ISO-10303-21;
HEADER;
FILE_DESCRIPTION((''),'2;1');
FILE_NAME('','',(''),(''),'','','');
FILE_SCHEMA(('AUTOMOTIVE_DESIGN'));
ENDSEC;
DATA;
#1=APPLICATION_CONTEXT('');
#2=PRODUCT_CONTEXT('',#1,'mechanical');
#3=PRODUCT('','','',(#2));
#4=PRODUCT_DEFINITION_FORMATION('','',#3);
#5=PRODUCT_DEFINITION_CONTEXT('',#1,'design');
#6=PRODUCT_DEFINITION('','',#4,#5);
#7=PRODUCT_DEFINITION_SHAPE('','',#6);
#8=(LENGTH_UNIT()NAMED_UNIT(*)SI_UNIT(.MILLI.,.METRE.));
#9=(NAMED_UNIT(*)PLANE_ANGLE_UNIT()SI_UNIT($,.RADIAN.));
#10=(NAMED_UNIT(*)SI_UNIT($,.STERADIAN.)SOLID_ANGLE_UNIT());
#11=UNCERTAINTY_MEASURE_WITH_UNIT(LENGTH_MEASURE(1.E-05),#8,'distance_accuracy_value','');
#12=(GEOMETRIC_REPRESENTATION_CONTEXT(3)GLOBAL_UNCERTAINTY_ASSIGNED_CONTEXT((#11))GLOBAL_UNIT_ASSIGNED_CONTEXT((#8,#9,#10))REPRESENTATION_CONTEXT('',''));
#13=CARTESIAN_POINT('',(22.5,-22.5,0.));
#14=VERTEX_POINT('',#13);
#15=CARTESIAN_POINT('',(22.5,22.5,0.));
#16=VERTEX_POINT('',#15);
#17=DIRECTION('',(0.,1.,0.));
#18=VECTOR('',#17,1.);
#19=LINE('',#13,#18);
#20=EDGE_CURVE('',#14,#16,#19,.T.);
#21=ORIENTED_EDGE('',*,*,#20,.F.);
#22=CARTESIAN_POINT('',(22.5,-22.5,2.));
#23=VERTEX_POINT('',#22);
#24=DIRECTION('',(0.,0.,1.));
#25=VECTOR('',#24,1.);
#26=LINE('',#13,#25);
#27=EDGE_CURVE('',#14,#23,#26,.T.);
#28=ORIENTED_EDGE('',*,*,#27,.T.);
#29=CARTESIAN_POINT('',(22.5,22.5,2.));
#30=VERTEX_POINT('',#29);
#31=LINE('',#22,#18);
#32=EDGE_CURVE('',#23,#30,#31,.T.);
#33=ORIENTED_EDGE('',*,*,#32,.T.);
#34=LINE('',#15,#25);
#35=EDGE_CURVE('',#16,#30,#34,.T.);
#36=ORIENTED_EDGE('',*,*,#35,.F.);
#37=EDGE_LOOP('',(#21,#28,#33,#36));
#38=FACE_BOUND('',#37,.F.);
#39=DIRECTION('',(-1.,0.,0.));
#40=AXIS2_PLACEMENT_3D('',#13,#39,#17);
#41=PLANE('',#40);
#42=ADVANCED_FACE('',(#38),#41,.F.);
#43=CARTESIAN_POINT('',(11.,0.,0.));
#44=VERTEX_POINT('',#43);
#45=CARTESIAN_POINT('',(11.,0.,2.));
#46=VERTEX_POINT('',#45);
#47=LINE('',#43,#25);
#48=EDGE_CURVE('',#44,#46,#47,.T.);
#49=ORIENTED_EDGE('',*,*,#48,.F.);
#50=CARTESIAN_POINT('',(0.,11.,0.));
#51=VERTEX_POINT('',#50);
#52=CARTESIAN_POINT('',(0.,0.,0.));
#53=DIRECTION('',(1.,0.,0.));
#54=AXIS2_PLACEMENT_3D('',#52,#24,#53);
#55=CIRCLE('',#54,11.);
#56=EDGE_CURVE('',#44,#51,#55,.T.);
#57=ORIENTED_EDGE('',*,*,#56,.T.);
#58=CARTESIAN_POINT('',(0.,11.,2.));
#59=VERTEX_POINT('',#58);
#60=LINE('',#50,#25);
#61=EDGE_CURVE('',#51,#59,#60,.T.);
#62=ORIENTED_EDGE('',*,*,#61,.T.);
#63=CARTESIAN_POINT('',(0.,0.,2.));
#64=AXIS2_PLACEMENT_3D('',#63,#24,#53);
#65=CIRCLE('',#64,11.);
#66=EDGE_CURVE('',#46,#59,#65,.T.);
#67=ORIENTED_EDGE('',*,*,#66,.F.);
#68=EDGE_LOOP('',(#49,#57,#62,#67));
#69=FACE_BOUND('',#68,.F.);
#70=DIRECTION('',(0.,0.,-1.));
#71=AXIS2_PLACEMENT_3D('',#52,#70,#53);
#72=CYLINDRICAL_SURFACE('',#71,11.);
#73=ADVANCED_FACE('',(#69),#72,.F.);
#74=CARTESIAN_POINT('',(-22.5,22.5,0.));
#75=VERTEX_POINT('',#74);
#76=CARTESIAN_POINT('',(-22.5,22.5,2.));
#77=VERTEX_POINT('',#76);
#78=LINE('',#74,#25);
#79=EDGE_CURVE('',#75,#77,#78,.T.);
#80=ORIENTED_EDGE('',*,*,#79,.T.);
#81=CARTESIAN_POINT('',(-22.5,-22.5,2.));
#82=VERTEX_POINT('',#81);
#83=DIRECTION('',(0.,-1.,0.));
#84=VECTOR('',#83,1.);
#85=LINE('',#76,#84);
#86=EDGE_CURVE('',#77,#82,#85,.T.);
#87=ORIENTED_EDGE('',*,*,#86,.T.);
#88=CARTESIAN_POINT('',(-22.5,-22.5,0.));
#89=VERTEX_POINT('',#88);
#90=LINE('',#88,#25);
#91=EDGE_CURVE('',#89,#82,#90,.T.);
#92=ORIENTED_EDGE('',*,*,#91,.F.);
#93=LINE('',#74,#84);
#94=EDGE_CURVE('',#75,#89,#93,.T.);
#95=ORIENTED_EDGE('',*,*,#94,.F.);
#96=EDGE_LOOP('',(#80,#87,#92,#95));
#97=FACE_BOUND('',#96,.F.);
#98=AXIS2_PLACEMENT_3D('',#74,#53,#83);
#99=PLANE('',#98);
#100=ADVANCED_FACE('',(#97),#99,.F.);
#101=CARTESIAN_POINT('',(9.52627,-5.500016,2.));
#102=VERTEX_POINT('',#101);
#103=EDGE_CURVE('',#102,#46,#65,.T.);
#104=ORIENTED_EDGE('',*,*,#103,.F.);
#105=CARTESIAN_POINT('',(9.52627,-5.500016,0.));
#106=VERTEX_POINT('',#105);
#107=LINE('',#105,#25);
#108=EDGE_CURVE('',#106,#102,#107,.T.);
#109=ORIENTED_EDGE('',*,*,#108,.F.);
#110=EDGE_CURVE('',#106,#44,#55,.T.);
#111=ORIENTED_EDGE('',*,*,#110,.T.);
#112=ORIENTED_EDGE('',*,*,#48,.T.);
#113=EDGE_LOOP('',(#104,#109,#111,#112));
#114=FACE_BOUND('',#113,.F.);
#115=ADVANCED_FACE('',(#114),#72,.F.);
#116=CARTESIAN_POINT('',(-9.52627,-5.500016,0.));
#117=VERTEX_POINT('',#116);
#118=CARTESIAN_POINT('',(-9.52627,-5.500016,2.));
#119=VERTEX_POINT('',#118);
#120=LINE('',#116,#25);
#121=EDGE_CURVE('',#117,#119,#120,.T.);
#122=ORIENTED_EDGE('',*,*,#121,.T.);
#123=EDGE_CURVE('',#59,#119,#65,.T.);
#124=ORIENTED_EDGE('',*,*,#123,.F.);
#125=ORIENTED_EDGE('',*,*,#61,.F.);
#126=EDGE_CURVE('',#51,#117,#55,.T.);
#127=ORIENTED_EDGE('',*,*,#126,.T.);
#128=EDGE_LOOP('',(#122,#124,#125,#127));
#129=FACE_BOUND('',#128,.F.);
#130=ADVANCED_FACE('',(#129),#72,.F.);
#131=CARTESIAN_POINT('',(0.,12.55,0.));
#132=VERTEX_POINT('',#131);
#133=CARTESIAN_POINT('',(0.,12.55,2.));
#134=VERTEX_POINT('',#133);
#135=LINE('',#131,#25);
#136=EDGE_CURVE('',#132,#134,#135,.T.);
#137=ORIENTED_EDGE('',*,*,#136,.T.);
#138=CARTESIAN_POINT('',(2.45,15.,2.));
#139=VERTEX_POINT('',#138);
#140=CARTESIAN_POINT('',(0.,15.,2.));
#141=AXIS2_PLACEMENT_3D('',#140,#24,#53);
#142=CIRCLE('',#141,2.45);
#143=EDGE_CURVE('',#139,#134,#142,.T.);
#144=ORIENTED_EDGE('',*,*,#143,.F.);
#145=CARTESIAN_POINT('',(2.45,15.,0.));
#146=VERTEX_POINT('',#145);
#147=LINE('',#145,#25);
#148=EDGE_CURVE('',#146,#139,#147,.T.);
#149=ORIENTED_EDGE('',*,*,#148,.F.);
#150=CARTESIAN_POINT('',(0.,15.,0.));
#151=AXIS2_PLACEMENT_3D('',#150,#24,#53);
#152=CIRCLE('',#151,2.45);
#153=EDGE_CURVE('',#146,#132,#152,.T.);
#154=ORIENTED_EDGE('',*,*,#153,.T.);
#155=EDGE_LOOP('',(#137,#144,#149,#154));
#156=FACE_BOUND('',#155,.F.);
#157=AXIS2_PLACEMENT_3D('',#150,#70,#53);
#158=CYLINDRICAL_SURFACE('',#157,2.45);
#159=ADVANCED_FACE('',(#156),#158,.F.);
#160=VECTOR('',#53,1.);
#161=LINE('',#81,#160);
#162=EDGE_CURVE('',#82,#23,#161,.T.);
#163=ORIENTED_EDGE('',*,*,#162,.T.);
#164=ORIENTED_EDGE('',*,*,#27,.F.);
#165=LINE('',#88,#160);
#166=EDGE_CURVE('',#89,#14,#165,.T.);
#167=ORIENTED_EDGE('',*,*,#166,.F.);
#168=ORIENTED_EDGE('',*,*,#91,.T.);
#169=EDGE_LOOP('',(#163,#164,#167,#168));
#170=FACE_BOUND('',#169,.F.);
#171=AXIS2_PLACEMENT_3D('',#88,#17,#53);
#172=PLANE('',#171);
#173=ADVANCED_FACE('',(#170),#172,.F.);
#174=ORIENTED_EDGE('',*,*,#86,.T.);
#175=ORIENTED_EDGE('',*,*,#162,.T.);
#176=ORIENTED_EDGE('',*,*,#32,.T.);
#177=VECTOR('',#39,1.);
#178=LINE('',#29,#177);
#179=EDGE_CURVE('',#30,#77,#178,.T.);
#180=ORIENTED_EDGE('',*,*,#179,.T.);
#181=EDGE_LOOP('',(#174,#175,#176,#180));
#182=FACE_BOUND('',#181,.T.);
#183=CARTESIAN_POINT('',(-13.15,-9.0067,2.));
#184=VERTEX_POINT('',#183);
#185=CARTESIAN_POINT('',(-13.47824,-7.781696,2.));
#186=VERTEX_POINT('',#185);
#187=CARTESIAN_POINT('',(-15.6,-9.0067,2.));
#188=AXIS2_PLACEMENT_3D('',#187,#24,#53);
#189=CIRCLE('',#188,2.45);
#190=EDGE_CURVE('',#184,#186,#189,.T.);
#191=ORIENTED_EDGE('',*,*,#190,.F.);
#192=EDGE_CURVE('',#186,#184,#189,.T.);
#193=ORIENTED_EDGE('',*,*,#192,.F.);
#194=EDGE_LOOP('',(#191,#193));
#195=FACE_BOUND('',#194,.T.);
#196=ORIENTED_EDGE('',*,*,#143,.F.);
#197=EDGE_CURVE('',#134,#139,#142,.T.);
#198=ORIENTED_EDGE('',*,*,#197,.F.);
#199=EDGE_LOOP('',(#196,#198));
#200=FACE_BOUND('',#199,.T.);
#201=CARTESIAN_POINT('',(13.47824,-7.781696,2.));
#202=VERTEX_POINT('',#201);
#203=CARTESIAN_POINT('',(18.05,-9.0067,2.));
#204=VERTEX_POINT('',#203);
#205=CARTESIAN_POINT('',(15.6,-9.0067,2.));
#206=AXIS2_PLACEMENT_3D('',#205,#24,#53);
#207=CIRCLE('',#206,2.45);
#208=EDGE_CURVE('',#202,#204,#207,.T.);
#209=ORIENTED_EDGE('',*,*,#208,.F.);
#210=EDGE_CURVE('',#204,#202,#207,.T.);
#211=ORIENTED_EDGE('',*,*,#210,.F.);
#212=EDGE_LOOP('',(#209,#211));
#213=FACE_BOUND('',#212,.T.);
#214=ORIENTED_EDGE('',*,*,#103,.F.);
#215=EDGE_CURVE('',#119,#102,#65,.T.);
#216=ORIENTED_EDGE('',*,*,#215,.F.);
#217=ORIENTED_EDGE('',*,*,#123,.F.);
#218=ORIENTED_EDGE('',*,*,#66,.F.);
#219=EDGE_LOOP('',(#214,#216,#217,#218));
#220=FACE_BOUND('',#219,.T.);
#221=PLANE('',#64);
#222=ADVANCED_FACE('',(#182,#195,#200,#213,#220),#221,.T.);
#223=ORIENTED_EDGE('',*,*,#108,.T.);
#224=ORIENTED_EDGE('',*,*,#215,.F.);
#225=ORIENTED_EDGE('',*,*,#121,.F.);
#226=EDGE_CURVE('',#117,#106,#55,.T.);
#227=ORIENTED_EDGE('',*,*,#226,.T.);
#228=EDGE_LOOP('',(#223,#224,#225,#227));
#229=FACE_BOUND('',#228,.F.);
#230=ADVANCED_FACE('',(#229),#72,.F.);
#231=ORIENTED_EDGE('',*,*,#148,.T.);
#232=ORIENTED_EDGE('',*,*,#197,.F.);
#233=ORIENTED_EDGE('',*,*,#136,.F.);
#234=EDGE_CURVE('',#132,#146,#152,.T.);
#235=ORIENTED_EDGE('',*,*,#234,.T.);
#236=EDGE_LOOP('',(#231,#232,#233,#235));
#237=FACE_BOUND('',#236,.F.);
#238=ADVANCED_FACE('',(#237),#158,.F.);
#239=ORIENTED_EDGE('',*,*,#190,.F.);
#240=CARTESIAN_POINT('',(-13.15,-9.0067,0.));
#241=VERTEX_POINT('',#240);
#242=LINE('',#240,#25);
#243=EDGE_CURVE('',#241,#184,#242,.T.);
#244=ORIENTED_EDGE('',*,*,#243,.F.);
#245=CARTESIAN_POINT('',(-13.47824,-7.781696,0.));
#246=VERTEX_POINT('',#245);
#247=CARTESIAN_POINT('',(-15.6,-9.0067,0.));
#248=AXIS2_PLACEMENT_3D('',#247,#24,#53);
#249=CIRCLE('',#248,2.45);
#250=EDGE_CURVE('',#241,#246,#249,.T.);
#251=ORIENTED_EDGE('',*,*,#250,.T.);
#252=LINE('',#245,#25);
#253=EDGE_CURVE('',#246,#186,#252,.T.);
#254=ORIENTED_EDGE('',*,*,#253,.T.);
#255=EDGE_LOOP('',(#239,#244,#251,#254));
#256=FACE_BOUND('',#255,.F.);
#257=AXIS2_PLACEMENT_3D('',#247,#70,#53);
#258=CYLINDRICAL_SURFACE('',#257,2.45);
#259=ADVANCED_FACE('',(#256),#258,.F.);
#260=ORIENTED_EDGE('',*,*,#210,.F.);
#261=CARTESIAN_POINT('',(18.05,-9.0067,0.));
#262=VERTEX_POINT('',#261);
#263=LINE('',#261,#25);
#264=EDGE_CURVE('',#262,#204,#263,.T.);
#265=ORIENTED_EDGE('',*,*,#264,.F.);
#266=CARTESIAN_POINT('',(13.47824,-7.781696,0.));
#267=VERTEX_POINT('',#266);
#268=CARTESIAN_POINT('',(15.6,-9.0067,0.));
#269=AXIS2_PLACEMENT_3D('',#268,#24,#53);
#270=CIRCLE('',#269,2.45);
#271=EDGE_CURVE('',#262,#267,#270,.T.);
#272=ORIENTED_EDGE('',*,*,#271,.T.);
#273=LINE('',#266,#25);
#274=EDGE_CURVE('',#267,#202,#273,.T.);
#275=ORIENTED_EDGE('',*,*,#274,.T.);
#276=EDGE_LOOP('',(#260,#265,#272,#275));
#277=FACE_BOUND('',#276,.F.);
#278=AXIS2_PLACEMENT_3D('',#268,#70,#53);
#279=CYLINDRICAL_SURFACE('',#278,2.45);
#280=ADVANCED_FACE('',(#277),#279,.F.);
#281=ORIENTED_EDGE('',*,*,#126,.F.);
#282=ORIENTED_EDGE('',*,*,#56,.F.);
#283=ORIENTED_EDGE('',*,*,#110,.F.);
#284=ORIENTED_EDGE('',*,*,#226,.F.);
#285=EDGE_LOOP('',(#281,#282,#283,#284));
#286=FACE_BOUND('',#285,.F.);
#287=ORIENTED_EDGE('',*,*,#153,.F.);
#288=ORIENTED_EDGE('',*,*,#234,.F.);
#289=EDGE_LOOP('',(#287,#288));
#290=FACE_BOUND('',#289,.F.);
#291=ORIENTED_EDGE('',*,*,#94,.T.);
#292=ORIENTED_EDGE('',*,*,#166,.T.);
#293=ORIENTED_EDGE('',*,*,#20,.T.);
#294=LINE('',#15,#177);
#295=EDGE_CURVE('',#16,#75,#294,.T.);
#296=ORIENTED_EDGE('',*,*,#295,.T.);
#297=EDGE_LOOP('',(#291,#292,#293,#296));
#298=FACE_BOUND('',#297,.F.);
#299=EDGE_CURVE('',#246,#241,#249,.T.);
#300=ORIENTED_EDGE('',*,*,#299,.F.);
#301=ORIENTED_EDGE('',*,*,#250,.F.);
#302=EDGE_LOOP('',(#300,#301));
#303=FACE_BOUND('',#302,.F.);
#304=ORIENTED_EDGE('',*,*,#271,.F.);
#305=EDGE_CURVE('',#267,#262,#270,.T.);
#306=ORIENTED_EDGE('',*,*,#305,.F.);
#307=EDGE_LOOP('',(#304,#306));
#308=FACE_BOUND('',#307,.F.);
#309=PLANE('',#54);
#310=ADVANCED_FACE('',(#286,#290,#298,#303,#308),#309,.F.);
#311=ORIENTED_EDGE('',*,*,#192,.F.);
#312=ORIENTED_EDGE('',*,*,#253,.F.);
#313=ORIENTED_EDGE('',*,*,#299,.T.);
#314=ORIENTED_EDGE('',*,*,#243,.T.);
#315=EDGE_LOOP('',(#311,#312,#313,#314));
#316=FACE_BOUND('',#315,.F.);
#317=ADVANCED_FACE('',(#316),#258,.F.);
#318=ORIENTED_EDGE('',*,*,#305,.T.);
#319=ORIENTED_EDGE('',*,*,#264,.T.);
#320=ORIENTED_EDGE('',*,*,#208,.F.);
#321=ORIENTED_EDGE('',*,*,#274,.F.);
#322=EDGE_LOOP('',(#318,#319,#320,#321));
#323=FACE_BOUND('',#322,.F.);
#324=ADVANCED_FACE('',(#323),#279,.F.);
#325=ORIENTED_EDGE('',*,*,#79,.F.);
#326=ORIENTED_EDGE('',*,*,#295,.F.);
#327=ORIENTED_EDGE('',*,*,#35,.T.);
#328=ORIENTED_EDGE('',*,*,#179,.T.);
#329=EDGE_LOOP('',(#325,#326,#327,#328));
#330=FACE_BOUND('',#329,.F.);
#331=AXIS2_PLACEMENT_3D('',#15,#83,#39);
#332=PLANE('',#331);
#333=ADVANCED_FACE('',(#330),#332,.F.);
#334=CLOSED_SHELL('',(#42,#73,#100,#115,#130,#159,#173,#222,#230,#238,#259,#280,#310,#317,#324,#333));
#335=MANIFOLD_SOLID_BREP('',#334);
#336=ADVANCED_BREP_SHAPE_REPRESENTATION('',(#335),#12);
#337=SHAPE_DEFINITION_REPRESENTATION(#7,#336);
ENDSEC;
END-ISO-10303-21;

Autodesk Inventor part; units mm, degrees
ref_plane "YZ Plane" through (0, 0, 0) normal (1, 0, 0) x (0, 1, 0)
ref_plane "XZ Plane" through (0, 0, 0) normal (0, 1, 0) x (-1, 0, 0)
ref_plane "XY Plane" through (0, 0, 0) normal (0, 0, 1) x (1, 0, 0)
sketch "Sketch1" plane through (0, 0, 0) normal (0, 0, 1) x (1, 0, 0)
  line L0 (-22.5, -22.5) -> (22.5, -22.5)
  line L1 (22.5, -22.5) -> (22.5, 22.5)
  line L2 (22.5, 22.5) -> (-22.5, 22.5)
  line L3 (-22.5, 22.5) -> (-22.5, -22.5)
  line L4 (-22.5, -22.5) -> (22.5, 22.5) construction
  line L5 (22.5, -22.5) -> (-22.5, 22.5) construction
  circle A0 centre (0, 0) radius 11
  line L6 (0, 0) -> (0, 15)
  line L7 (0, 0) -> (15.6, -9.0067)
  line L8 (0, 0) -> (-15.6, -9.0067)
  circle A1 centre (0, 15) radius 2.45
  circle A2 centre (15.6, -9.0067) radius 2.45
  circle A3 centre (-15.6, -9.0067) radius 2.45
  point P0 (22.5, -11.0947)
  point P1 (-22.5, -11.0947)
  dimension "d0" = 45
  dimension "d1" = 45
  dimension "d2" = 22
  dimension "d3" = 15
  dimension "d4" = 15.6
  dimension "d5" = 120
  dimension "d6" = 15.6
  dimension "d7" = 120
  dimension "d8" = 4.9
  dimension "d9" = 4.9
  dimension "d10" = 4.9
extrude "Extrusion2" add sketch "Sketch1" along normal blind 2
equation "\"d1\" = d0"
equation "\"d4\" = d6"
equation "\"d7\" = d5"
equation "\"d9\" = d8"
equation "\"d10\" = d8"
properties part number "mount_v05"
